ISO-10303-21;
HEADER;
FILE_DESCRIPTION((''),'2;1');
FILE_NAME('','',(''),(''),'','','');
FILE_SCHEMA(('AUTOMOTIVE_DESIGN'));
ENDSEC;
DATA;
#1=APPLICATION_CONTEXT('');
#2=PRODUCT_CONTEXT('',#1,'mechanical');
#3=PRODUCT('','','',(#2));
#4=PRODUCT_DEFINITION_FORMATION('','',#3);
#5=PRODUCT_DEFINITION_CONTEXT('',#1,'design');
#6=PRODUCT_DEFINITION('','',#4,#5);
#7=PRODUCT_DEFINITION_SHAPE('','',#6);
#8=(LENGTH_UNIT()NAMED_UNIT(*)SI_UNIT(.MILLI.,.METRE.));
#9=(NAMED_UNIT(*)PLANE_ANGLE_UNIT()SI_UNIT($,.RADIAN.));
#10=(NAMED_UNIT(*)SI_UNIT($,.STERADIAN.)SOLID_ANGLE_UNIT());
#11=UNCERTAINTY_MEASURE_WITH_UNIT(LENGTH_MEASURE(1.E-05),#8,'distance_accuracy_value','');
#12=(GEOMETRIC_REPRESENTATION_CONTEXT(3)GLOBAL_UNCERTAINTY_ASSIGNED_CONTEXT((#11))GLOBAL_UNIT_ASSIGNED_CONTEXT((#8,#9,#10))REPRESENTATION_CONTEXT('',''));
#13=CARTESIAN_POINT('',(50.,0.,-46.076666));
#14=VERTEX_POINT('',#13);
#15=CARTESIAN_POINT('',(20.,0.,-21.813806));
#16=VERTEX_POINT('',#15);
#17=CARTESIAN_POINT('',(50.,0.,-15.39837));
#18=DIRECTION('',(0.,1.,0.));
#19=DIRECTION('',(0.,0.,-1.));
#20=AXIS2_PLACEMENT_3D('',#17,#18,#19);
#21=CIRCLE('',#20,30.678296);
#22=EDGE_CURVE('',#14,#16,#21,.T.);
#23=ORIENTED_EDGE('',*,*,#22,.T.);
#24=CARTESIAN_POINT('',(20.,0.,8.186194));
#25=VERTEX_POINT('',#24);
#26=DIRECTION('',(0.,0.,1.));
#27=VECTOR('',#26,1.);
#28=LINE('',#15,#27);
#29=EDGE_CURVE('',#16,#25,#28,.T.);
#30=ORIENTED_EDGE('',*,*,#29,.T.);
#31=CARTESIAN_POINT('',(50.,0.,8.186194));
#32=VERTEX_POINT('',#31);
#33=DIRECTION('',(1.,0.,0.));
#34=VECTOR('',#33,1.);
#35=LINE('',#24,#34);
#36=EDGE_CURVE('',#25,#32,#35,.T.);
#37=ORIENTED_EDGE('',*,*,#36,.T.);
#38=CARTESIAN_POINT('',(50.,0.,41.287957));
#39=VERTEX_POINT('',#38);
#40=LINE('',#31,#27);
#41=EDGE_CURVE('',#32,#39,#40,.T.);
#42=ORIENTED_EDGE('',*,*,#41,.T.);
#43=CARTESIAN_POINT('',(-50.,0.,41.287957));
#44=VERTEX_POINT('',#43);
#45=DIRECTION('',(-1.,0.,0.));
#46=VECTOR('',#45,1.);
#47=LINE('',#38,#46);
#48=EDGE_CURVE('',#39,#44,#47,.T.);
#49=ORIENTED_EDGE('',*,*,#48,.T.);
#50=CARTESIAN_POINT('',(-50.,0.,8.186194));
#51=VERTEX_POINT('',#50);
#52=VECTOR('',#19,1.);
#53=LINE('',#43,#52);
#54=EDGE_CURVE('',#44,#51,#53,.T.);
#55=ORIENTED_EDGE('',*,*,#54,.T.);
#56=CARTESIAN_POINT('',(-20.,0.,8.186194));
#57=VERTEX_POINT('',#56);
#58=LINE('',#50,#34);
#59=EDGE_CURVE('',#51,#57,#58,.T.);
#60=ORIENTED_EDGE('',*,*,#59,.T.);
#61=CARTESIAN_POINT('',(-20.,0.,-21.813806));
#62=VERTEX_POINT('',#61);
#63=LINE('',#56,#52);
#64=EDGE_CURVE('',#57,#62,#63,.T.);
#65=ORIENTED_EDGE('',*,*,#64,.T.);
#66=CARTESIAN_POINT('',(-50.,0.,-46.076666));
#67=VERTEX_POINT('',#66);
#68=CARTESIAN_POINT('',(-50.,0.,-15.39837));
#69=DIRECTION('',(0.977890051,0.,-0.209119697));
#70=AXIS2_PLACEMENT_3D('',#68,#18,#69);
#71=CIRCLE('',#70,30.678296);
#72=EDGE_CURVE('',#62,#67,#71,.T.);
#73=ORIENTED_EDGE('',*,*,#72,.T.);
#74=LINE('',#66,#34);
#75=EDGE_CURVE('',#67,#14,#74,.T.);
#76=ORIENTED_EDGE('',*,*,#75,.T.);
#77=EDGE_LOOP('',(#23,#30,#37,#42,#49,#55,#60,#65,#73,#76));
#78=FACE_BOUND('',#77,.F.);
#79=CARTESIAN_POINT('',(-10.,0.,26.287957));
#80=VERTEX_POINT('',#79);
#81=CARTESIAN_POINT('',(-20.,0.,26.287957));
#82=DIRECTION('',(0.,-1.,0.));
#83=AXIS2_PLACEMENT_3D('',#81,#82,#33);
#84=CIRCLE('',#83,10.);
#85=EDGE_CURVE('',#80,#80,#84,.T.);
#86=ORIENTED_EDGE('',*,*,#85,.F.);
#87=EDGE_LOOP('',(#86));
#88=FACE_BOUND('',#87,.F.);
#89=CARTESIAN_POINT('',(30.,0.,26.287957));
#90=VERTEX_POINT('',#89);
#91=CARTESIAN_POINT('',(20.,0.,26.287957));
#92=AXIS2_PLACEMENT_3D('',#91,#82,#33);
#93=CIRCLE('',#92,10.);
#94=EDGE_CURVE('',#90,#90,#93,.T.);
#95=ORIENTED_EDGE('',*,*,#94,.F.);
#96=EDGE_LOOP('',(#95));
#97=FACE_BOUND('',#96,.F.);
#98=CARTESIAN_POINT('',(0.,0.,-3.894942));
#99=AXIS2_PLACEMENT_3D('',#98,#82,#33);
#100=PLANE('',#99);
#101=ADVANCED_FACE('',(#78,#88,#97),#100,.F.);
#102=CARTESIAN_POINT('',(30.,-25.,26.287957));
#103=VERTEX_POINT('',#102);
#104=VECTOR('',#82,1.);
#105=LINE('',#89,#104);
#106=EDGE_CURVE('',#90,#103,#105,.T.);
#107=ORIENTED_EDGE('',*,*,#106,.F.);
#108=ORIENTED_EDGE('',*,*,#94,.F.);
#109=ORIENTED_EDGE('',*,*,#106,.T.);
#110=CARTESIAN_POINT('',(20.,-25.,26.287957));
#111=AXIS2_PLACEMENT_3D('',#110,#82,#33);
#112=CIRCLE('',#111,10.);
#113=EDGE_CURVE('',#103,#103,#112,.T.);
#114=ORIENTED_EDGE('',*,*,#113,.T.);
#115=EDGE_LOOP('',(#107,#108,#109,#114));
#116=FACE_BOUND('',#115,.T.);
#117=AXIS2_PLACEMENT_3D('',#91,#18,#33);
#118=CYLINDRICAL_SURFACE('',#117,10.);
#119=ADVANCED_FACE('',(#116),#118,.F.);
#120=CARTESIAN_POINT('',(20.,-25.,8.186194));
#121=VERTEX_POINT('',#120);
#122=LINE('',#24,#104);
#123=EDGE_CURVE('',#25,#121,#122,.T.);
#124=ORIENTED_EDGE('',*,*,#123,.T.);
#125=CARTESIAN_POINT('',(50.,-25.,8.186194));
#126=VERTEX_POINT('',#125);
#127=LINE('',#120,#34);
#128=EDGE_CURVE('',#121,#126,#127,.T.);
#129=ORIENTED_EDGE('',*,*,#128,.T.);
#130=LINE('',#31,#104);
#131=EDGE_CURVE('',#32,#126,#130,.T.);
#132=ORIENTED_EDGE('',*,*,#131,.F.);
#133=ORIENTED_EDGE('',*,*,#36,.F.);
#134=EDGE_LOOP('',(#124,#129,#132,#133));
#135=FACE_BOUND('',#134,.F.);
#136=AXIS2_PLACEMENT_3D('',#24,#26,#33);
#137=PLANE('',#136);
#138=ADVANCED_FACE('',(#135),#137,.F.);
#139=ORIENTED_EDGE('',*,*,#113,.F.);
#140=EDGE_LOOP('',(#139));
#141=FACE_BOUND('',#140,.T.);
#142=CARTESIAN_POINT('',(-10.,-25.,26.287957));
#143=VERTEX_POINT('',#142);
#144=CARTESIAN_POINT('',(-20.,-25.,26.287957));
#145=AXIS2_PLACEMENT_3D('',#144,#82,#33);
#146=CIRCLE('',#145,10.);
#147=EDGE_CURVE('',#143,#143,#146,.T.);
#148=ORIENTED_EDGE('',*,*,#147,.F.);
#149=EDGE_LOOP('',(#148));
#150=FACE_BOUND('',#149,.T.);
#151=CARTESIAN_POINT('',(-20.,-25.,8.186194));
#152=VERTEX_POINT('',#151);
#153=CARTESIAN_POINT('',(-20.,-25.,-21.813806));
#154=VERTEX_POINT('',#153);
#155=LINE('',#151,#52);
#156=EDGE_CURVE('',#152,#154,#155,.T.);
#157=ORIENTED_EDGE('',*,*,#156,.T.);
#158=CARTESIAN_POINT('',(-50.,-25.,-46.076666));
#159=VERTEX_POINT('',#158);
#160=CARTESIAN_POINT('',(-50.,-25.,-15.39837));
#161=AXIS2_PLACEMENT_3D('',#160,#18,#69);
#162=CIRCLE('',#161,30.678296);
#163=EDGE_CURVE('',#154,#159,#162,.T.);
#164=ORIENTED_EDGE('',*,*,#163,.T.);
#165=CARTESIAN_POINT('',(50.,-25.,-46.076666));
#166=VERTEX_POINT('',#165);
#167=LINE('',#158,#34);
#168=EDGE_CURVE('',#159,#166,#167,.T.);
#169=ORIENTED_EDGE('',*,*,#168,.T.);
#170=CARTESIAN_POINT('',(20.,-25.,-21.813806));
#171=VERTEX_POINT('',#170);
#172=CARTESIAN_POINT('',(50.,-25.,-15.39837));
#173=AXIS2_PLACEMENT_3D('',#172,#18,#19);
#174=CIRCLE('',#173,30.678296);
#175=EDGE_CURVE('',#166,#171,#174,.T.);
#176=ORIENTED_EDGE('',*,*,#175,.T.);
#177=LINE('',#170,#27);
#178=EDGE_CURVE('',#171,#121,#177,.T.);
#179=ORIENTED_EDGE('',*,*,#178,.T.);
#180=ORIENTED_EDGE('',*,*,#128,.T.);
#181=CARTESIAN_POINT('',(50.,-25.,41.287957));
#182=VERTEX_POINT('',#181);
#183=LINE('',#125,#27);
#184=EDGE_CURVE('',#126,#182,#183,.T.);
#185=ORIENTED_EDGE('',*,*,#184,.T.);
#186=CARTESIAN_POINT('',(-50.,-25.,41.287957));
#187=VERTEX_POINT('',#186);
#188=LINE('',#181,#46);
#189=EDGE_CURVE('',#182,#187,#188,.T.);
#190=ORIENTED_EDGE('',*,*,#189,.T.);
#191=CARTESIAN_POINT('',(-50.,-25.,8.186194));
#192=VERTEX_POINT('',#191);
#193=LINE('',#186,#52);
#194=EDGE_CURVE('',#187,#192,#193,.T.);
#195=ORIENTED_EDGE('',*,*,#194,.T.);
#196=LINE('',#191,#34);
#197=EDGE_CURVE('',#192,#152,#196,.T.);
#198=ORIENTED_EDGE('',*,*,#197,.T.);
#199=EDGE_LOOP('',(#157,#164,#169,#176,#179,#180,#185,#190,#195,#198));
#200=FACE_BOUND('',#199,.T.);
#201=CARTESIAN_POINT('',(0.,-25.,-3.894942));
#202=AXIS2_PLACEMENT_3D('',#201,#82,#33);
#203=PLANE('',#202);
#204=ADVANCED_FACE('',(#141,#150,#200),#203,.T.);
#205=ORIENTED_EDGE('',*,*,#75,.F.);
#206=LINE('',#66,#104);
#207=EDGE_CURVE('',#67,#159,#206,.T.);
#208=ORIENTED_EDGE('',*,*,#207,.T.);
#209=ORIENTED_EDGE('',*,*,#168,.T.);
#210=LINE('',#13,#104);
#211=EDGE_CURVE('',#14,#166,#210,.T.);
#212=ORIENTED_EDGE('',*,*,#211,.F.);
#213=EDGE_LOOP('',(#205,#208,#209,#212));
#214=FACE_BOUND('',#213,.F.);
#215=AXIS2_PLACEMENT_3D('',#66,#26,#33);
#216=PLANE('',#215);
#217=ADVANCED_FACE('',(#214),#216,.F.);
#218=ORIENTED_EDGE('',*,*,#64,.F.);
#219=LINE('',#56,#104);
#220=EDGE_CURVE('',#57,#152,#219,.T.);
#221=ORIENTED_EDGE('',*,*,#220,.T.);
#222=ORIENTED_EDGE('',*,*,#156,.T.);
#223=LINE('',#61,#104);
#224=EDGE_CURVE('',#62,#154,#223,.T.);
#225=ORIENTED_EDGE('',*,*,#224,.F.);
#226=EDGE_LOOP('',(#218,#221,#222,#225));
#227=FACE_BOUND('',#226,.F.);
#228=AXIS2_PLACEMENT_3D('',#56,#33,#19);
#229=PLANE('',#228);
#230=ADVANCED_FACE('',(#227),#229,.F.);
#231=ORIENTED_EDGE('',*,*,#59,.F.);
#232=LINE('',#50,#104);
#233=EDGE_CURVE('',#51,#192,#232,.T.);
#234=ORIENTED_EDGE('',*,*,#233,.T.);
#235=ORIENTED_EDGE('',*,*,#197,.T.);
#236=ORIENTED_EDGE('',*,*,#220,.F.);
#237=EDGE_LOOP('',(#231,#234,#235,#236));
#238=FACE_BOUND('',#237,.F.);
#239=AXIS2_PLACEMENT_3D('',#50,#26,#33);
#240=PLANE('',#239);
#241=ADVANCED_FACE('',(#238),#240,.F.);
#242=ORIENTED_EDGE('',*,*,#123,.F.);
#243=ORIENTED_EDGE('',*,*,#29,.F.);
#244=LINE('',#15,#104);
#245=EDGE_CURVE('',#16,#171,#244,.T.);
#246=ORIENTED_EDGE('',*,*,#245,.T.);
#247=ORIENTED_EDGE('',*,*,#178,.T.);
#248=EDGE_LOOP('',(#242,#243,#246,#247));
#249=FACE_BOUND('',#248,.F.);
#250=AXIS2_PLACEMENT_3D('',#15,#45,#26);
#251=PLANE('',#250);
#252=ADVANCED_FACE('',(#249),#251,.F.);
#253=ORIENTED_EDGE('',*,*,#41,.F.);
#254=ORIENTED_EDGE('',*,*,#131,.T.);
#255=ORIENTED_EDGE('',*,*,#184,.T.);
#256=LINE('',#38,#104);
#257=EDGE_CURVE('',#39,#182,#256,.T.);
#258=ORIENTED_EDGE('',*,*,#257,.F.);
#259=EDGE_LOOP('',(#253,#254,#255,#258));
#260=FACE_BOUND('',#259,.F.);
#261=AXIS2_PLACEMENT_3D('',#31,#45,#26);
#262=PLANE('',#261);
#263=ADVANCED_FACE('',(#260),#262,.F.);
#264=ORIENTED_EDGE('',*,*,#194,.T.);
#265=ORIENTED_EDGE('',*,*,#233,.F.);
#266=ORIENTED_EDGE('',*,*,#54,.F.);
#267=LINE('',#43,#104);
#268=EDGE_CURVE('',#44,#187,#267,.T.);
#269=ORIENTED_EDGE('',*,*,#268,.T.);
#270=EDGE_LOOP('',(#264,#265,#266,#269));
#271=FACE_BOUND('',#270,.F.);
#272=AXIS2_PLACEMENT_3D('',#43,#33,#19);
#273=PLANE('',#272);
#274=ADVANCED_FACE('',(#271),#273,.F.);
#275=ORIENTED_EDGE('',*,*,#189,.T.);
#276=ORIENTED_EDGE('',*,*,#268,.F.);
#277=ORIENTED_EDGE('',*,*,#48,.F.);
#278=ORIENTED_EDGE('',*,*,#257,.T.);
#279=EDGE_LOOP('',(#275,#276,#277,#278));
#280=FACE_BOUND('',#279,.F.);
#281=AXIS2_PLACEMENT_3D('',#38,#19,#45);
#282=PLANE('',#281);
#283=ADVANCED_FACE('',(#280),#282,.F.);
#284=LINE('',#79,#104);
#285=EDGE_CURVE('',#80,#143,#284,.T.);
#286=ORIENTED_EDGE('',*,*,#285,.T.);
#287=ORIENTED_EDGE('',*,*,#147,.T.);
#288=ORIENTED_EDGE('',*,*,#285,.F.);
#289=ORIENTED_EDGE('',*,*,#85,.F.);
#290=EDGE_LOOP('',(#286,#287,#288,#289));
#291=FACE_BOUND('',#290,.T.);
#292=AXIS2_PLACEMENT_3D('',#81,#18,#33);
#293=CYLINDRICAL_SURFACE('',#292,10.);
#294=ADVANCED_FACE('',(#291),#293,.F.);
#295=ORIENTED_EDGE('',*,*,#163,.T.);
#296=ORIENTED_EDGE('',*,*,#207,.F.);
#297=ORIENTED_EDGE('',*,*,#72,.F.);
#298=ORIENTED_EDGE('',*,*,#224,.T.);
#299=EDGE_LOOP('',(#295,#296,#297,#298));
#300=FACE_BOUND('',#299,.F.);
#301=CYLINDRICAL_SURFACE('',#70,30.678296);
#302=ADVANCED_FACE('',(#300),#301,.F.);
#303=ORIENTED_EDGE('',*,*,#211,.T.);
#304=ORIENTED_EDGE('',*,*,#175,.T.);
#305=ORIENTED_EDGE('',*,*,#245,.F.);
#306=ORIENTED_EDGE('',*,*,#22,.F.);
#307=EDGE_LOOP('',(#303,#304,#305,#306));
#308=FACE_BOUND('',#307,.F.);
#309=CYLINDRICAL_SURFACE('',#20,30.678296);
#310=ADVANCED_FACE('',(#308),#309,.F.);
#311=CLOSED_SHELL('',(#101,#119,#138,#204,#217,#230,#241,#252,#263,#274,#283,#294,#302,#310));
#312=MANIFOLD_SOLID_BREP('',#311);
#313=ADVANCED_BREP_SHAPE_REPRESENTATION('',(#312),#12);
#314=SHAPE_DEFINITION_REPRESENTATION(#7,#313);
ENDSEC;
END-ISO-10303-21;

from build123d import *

# Parameters (mm, degrees)
F0_R     = 10
F1_DEPTH = 25


# Not quite as in the source:
# - the program builds the solid bodies; features that only make, move or delete a surface that nothing else refers to are left out


with BuildPart() as f1:
    # F0 (on Front) → F1 (new body)
    with BuildSketch(Plane.XZ):
        with BuildLine():
            ThreePointArc((-20, -21.8138062528), (-30.7082507277, -39.2518025849), (-50, -46.0766659346))
            Line((-50, -46.0766659346), (50, -46.0766659346))
            ThreePointArc((50, -46.0766659346), (30.7082507277, -39.2518025849), (20, -21.8138062528))
            Line((20, -21.8138062528), (20, 8.1861937472))
            Line((20, 8.1861937472), (50, 8.1861937472))
            Line((50, 8.1861937472), (50, 41.2879567593))
            Line((50, 41.2879567593), (-50, 41.2879567593))
            Line((-50, 41.2879567593), (-50, 8.1861937472))
            Line((-50, 8.1861937472), (-20, 8.1861937472))
            Line((-20, 8.1861937472), (-20, -21.8138062528))
        make_face()
        with Locations((-20, 26.2879567593)):
            Circle(F0_R, mode=Mode.SUBTRACT)
        with Locations((20, 26.2879567593)):
            Circle(F0_R, mode=Mode.SUBTRACT)
    extrude(amount=F1_DEPTH)


solid = f1.part
